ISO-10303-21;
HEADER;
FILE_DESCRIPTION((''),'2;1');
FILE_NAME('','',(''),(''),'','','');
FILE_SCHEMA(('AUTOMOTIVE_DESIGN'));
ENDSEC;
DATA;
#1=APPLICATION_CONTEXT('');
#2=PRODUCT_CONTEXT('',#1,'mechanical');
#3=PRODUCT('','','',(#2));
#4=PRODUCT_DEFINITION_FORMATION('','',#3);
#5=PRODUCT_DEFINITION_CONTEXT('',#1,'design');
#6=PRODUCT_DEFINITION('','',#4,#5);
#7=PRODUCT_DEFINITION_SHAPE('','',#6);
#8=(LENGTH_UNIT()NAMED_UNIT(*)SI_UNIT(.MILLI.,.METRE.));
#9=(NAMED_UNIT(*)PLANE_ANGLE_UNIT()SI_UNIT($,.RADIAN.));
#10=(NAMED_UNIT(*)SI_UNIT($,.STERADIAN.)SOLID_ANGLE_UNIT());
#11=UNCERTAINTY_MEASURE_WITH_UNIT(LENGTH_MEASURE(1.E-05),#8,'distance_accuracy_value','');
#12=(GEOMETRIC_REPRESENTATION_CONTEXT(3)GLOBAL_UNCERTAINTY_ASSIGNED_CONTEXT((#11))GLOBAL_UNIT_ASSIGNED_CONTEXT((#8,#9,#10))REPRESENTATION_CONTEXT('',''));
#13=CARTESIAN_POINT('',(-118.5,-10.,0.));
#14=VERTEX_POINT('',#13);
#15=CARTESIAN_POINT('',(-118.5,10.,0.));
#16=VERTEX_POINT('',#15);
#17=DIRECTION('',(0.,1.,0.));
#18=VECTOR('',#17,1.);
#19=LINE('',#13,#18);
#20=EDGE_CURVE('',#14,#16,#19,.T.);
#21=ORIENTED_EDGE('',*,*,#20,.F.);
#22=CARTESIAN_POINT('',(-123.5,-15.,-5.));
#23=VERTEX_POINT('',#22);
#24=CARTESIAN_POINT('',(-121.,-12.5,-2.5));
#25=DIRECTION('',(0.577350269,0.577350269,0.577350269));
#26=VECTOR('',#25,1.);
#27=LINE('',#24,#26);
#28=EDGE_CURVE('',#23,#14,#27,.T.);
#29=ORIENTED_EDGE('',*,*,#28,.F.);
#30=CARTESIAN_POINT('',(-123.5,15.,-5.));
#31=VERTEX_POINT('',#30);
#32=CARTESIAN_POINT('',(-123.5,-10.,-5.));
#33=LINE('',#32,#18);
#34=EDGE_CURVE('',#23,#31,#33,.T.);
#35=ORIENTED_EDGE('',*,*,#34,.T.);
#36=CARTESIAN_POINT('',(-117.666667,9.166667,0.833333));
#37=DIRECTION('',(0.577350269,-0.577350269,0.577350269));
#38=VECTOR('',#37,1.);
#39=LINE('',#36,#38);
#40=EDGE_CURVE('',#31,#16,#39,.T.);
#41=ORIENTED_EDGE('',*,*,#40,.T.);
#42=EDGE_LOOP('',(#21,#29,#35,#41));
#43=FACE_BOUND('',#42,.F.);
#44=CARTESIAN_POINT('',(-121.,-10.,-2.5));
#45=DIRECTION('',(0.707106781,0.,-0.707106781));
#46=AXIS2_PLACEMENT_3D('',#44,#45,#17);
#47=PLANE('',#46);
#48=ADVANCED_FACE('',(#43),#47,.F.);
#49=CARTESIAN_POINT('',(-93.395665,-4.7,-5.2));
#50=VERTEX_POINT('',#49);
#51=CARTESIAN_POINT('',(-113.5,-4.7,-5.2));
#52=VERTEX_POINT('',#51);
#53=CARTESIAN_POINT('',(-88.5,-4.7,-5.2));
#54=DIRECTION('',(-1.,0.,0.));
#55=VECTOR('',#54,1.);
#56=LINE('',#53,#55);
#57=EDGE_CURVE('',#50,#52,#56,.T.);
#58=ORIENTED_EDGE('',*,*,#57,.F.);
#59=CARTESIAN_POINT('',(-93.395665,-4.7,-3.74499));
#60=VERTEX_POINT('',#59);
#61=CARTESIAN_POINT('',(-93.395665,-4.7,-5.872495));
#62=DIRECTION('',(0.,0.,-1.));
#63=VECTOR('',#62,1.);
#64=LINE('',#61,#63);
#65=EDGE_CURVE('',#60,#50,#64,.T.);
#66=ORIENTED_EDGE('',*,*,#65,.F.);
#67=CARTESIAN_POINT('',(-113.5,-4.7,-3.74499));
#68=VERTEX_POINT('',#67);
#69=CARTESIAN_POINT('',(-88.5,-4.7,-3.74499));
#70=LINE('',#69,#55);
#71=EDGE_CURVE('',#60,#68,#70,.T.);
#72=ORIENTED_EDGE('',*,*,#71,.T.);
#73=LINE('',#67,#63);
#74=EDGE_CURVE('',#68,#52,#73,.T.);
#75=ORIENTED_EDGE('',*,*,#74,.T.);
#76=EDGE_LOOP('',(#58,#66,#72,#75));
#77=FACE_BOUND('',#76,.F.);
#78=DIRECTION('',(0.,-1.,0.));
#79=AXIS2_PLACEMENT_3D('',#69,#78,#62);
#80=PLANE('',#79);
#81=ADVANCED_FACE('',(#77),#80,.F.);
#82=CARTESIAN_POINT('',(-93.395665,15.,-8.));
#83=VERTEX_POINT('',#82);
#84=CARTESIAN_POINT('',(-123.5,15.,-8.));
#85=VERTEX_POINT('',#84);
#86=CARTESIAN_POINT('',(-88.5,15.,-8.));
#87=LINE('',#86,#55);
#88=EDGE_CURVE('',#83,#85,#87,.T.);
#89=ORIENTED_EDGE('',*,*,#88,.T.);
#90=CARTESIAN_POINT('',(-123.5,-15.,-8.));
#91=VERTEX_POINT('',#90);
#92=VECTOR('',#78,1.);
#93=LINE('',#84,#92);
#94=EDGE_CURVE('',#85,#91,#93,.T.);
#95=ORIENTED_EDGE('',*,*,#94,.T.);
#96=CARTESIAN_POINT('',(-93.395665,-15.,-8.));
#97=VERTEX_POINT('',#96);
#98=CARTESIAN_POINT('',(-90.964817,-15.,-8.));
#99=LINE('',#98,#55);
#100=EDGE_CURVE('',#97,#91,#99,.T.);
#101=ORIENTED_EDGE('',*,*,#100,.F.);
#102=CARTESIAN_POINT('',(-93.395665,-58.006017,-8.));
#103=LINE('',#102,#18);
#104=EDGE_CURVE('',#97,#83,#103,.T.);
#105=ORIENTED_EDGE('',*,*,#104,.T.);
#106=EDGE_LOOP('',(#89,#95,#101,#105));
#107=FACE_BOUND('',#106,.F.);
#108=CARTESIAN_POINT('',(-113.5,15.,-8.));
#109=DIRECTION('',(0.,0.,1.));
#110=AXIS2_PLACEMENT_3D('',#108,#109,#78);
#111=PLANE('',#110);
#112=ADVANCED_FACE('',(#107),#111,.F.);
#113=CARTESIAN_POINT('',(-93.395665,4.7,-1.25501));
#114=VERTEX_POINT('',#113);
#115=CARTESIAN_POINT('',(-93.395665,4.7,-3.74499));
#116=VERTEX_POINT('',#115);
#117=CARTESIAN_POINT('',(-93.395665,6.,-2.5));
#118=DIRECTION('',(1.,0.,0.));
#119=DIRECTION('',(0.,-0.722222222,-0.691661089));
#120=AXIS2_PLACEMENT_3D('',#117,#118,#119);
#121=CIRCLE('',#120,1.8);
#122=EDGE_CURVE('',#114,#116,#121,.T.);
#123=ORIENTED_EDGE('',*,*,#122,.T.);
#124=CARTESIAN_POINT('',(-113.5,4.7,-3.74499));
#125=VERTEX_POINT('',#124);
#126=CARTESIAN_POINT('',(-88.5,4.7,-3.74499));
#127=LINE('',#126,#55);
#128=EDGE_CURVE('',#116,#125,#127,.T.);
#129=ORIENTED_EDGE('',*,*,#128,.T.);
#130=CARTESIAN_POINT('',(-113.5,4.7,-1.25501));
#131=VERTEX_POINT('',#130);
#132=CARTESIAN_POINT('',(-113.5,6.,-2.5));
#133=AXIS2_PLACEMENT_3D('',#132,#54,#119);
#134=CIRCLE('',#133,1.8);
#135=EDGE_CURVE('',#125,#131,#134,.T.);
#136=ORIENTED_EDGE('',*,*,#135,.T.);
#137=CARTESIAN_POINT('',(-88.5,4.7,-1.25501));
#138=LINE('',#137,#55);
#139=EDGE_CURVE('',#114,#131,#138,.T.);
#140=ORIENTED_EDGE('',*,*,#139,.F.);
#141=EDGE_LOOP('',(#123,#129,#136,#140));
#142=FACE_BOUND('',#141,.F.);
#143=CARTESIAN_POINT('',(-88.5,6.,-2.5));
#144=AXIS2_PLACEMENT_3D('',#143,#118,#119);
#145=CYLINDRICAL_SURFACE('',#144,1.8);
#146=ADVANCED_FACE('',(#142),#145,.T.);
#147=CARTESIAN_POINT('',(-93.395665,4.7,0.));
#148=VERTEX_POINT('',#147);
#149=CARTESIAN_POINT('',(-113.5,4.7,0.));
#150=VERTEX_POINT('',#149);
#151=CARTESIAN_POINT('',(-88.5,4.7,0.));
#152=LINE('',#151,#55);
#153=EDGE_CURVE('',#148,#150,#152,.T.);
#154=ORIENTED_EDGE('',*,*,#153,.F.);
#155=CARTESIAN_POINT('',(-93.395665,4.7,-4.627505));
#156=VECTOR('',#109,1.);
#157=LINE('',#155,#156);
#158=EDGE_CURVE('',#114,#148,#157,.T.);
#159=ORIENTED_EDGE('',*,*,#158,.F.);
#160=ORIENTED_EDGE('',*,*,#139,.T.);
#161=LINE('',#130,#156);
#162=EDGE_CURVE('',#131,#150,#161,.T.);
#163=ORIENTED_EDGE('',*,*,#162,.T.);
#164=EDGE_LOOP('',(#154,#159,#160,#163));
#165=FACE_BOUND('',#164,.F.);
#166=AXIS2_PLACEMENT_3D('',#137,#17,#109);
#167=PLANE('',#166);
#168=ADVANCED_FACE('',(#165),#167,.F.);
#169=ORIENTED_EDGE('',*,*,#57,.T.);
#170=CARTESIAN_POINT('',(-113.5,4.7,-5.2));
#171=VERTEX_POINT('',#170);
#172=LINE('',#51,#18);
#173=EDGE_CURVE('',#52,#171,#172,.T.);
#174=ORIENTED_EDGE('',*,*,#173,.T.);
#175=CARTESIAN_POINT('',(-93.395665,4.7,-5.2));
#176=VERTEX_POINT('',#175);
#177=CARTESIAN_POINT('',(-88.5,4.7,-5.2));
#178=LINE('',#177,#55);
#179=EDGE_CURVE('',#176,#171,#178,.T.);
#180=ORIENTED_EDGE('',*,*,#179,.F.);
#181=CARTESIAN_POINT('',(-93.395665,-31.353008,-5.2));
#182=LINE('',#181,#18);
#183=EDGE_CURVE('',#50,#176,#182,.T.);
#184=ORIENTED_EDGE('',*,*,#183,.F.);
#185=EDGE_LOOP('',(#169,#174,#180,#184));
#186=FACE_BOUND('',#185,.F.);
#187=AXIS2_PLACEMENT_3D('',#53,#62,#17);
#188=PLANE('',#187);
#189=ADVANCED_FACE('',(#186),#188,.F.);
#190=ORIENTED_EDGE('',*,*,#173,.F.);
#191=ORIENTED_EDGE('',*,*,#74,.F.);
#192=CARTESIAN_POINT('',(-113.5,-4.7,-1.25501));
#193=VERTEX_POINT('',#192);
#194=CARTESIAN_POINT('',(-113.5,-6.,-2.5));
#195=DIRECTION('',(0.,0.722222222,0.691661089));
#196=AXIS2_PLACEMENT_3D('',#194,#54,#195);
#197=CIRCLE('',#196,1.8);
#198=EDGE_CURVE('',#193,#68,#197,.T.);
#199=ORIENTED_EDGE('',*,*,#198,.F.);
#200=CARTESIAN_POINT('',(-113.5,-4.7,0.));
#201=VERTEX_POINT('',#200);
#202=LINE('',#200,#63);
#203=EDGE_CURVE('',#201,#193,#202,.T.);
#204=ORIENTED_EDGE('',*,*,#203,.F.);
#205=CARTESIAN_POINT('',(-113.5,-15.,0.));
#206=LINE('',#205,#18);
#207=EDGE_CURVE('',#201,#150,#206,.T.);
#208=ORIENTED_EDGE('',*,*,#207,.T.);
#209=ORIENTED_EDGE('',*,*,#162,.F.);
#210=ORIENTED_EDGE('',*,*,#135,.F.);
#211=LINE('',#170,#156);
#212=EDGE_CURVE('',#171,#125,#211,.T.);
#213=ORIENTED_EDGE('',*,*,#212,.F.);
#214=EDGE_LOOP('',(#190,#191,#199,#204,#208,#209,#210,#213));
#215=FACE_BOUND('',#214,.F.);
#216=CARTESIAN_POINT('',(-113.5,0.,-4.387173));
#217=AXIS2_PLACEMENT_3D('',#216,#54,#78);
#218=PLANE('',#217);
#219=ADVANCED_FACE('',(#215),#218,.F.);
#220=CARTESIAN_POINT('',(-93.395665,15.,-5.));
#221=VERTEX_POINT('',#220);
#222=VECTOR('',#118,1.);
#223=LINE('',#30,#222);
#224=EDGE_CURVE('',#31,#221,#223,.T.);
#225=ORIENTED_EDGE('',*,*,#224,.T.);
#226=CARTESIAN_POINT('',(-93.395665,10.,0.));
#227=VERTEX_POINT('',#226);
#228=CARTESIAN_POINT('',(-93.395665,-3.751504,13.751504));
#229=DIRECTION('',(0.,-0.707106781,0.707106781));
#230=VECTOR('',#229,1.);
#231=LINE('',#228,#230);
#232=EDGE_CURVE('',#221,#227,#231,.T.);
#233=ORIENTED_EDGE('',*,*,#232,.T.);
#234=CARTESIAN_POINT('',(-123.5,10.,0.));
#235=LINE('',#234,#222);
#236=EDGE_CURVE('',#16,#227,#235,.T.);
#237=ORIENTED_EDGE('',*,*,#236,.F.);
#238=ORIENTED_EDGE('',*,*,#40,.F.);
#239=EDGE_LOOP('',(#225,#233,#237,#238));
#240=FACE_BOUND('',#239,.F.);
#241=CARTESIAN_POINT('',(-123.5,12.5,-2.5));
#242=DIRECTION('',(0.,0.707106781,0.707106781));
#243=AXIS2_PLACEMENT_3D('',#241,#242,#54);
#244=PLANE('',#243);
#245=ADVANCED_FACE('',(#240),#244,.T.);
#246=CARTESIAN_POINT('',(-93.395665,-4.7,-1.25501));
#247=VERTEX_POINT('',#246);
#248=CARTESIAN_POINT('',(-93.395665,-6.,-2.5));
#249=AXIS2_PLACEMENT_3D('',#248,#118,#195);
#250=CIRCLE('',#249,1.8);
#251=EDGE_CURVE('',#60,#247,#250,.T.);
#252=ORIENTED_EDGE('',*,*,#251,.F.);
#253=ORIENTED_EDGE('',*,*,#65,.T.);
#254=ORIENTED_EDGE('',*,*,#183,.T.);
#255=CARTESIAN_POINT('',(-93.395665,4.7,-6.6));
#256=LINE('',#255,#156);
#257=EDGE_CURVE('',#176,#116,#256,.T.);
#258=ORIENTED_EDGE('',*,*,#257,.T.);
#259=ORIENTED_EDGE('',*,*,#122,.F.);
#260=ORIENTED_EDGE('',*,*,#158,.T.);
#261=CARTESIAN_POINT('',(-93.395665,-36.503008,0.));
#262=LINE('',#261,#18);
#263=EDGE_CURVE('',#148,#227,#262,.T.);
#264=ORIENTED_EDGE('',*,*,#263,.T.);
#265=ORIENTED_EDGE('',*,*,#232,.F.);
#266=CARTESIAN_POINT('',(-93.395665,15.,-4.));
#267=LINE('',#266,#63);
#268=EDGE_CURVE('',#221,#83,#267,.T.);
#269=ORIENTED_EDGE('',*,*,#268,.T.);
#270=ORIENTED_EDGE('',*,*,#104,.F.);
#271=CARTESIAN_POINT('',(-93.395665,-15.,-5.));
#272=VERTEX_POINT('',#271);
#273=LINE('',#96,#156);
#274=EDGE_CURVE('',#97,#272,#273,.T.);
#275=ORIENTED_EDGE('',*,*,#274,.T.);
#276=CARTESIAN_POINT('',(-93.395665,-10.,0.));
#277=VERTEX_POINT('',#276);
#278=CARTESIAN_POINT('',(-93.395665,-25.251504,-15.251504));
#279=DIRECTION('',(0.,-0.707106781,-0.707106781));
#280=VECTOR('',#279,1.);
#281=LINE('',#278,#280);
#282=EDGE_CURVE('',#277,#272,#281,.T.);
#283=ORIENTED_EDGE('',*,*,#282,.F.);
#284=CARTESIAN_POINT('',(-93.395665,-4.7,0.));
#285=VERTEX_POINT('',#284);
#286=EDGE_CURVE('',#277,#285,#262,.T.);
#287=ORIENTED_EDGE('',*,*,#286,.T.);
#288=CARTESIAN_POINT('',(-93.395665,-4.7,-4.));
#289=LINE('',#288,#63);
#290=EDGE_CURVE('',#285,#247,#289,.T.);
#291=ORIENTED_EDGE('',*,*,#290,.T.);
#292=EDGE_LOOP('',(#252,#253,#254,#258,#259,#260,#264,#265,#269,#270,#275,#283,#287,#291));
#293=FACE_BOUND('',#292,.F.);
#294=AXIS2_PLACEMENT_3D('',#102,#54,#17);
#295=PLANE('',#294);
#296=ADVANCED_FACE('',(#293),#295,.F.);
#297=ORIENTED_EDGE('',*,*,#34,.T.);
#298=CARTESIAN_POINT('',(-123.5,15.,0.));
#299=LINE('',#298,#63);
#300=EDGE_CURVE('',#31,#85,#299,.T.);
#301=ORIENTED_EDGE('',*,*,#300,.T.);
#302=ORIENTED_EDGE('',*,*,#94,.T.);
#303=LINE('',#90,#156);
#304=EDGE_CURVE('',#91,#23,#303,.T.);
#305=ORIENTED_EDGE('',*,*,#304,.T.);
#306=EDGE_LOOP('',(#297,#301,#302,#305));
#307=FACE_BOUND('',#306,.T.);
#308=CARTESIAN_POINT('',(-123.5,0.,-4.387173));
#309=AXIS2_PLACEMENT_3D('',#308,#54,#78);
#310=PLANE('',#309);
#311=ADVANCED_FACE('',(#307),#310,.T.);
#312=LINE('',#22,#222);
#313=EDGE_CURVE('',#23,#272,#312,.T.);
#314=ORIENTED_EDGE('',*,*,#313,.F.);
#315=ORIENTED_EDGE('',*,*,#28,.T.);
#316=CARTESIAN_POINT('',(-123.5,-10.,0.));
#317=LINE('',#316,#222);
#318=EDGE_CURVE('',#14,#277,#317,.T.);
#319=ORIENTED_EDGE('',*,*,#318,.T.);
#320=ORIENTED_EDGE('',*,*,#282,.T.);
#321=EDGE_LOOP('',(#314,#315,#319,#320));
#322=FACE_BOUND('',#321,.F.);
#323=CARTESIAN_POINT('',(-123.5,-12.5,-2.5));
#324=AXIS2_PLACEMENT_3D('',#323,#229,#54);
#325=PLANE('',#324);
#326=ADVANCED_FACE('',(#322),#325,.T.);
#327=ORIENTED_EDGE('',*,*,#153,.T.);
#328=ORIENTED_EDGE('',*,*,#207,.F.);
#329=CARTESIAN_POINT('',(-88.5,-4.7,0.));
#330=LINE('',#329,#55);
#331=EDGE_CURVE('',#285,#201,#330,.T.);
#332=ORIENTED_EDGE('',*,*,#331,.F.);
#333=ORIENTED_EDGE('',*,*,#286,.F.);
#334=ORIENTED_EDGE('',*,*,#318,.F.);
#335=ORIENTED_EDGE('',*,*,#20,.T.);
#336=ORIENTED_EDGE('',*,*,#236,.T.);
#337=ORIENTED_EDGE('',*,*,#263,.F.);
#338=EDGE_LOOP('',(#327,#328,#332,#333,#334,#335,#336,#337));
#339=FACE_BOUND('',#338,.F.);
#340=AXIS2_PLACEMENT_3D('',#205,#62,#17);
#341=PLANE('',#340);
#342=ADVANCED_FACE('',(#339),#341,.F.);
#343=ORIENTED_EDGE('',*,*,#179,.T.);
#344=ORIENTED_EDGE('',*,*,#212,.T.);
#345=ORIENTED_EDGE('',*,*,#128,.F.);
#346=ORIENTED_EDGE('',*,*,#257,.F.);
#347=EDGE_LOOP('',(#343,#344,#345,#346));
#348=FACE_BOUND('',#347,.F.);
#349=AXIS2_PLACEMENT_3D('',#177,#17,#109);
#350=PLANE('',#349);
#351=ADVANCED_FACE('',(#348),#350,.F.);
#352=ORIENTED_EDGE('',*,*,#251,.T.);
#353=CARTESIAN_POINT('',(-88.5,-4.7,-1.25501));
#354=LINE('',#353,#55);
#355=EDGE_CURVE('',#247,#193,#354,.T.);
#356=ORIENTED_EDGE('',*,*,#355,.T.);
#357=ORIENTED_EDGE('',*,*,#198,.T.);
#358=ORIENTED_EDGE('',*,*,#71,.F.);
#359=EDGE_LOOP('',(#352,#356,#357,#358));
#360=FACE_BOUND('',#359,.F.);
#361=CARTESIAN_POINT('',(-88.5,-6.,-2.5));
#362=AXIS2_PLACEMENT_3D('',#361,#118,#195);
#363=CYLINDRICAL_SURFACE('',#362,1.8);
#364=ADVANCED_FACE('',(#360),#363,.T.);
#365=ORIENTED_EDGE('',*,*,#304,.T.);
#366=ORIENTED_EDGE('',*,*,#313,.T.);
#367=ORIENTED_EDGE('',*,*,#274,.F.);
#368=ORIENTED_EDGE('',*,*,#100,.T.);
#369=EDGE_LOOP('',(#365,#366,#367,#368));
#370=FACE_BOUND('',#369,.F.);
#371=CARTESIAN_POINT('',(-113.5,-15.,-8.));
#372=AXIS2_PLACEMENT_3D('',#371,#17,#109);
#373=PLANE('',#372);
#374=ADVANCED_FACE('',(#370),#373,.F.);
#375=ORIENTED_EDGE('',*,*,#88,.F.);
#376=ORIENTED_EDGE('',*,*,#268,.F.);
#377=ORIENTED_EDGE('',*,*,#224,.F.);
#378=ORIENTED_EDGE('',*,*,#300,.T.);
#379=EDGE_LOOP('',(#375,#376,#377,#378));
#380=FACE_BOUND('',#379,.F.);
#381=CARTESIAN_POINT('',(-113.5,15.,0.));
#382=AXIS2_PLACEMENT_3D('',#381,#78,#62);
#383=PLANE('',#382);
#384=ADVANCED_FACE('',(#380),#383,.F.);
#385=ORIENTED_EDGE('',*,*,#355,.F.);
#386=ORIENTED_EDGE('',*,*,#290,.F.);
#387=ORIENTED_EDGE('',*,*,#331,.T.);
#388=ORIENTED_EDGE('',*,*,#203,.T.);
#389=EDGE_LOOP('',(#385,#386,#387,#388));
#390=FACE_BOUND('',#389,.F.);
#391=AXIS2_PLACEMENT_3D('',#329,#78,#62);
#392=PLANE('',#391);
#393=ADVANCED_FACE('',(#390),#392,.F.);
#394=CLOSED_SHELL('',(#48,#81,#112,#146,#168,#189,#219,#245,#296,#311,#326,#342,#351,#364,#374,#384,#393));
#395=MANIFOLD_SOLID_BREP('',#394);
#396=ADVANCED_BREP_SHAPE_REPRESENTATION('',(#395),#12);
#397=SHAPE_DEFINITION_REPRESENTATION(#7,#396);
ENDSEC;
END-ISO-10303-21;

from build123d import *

# Parameters (mm, degrees)
F0_W      = 16
F0_H      = 6
F1_DEPTH  = 95
F2_DEPTH  = 5
F3_R      = 2
F4_DEPTH  = 127.001
F5_SIZE   = 0.49999
F6_DEPTH  = 25
F8_DEPTH  = 25
F9_W      = 318.6057507992
F9_H      = 243.2989366353
F10_DEPTH = 19.501
F12_DEPTH = 10
F14_DEPTH = 8.001
F15_SIZE  = 5
F16_SIZE  = 5


# Not quite as in the source:
# - a fillet or chamfer is up to 0.001 mm smaller than in the source, because OpenCascade refuses the exact size


with BuildPart() as f1:
    # F0 (on Top) → F1 (new body)
    with BuildSketch(Plane.XY):
        Polygon((-8, -4.5), (63.5, -4.5), (63.5, 4.5), (-26, 4.5), (-28, 4.5), (-44, 4.5), (-46, 4.5), (-63.5, 4.5), (-63.5, -4.5), (-28, -4.5), (-26, -4.5), (-10, -4.5), align=None)
        with Locations((-54, 0)):
            Rectangle(F0_W, F0_H, mode=Mode.SUBTRACT)
        with Locations((-36, 0)):
            Rectangle(F0_W, F0_H, mode=Mode.SUBTRACT)
        with Locations((-18, 0)):
            Rectangle(F0_W, F0_H, mode=Mode.SUBTRACT)
        Rectangle(F0_W, F0_H, mode=Mode.SUBTRACT)
        with Locations((18, 0)):
            Rectangle(F0_W, F0_H, mode=Mode.SUBTRACT)
        with Locations((36, 0)):
            Rectangle(F0_W, F0_H, mode=Mode.SUBTRACT)
        with Locations((54, 0)):
            Rectangle(F0_W, F0_H, mode=Mode.SUBTRACT)
    extrude(amount=F1_DEPTH)

    # F0 (on Top) → F2 (join)
    with BuildSketch(Plane.XY):
        Polygon((-8, -4.5), (63.5, -4.5), (63.5, 4.5), (-26, 4.5), (-28, 4.5), (-44, 4.5), (-46, 4.5), (-63.5, 4.5), (-63.5, -4.5), (-28, -4.5), (-26, -4.5), (-10, -4.5), align=None)
        with Locations((-54, 0)):
            Rectangle(F0_W, F0_H, mode=Mode.SUBTRACT)
        with Locations((-36, 0)):
            Rectangle(F0_W, F0_H, mode=Mode.SUBTRACT)
        with Locations((-18, 0)):
            Rectangle(F0_W, F0_H, mode=Mode.SUBTRACT)
        Rectangle(F0_W, F0_H, mode=Mode.SUBTRACT)
        with Locations((18, 0)):
            Rectangle(F0_W, F0_H, mode=Mode.SUBTRACT)
        with Locations((36, 0)):
            Rectangle(F0_W, F0_H, mode=Mode.SUBTRACT)
        with Locations((54, 0)):
            Rectangle(F0_W, F0_H, mode=Mode.SUBTRACT)
        with Locations((-54, 0)):
            Rectangle(F0_W, F0_H)
        with Locations((-36, 0)):
            Rectangle(F0_W, F0_H)
        with Locations((-18, 0)):
            Rectangle(F0_W, F0_H)
        Rectangle(F0_W, F0_H)
        with Locations((18, 0)):
            Rectangle(F0_W, F0_H)
        with Locations((36, 0)):
            Rectangle(F0_W, F0_H)
        with Locations((54, 0)):
            Rectangle(F0_W, F0_H)
    extrude(amount=-F2_DEPTH)

    # F3 (on face) → F4 (cut, through all)
    with BuildSketch(Plane(origin=(-63.5, 0, 0), x_dir=(0, -1, 0), z_dir=(-1, 0, 0))):
        with Locations((-6, -2.5)):
            Circle(F3_R)
        with Locations((6, -2.5)):
            Circle(F3_R)
    extrude(amount=-F4_DEPTH, mode=Mode.SUBTRACT)

    # F5 (size 0.5 in the source; OpenCascade refuses exactly that, so slightly less here)
    f5_edges = [f1.edges().sort_by_distance(p)[0] for p in [
        (-63.5, 4.5, 46.911438),
        (-63.5, -4.5, 46.911438),
        (0, 4.5, -5),
        (-63.5, 0, -5),
        (-63.5, 4, -2.5),
        (0, 4.5, 95),
        (-63.5, 0, 95),
        (0, -4.5, 95),
        (63.5, 0, 95),
        (63.5, 0, -5),
        (63.5, 4.5, 46.911438),
        (63.5, -4.5, 46.911438),
        (-63.5, -4, -2.5),
        (63.5, 4, -2.5),
        (63.5, -4, -2.5),
        (54, -3, 95),
        (46, 0, 95),
        (54, 3, 95),
        (62, 0, 95),
        (44, 0, 95),
        (36, 3, 95),
        (36, -3, 95),
        (8, 0, 95),
        (10, 0, 95),
        (18, 3, 95),
        (18, -3, 95),
        (26, 0, 95),
        (28, 0, 95),
        (0, 3, 95),
        (0, -3, 95),
        (-8, 0, 95),
        (-10, 0, 95),
        (-18, -3, 95),
        (-26, 0, 95),
        (-18, 3, 95),
        (-36, 3, 95),
        (-28, 0, 95),
        (-36, -3, 95),
        (-54, 3, 95),
        (-62, 0, 95),
        (-54, -3, 95),
        (-46, 0, 95),
        (-44, 0, 95),
    ]]
    chamfer(f5_edges, length=F5_SIZE)

    # F3 (on face) → F6 (join)
    with BuildSketch(Plane(origin=(-63.5, 0, 0), x_dir=(0, -1, 0), z_dir=(-1, 0, 0))):
        with BuildLine():
            ThreePointArc((-4.5, -1.1771243445), (-4.1291713066, -1.7928932188), (-4, -2.5))
            ThreePointArc((-4, -2.5), (-4.1291713066, -3.2071067812), (-4.5, -3.8228756555))
            Line((-4.5, -3.8228756555), (-4.5, -5))
            Line((-4.5, -5), (4.5, -5))
            Line((4.5, -5), (4.5, -3.8228756555))
            ThreePointArc((4.5, -3.8228756555), (4, -2.5), (4.5, -1.1771243445))
            Line((4.5, -1.1771243445), (4.5, 95))
            Line((4.5, 95), (-4.5, 95))
            Line((-4.5, 95), (-4.5, -1.1771243445))
        make_face()
    extrude(amount=F6_DEPTH)


with BuildPart() as f8:
    # F7 (on face) → F8 (new body)
    with BuildSketch(Plane(origin=(-88.5, 0, 0), x_dir=(0, -1, 0), z_dir=(-1, 0, 0))):
        with BuildLine():
            Line((15, 0), (4.7, 0))
            Line((4.7, 0), (4.7, -1.2550100402))
            ThreePointArc((4.7, -1.2550100402), (4.2, -2.5), (4.7, -3.7449899598))
            Line((4.7, -3.7449899598), (4.7, -5.2))
            Line((4.7, -5.2), (-4.7, -5.2))
            Line((-4.7, -5.2), (-4.7, -3.7449899598))
            ThreePointArc((-4.7, -3.7449899598), (-4.2, -2.5), (-4.7, -1.2550100402))
            Line((-4.7, -1.2550100402), (-4.7, 0))
            Line((-4.7, 0), (-15, 0))
            Line((-15, 0), (-15, -8))
            Line((-15, -8), (15, -8))
            Line((15, -8), (15, 0))
        make_face()
    extrude(amount=F8_DEPTH)


with BuildPart() as f10_tool:
    # F9 (on face) → F10 (new body, through all)
    with BuildSketch(Plane(origin=(0, 4.5, 0), x_dir=(-1, 0, 0), z_dir=(0, 1, 0))):
        with Locations((-68.3380588889, 100.3342196345)):
            Rectangle(F9_W, F9_H)
    extrude(amount=-F10_DEPTH)


with BuildPart() as f1_1:
    add(f1.part)

    # F10: cut by f10_tool
    add(f10_tool.part, mode=Mode.SUBTRACT)


with BuildPart() as f8_1:
    add(f8.part)

    # F10: cut by f10_tool
    add(f10_tool.part, mode=Mode.SUBTRACT)

    # F11 (on face) → F12 (join)
    with BuildSketch(Plane(origin=(-113.5, 0, 0), x_dir=(0, -1, 0), z_dir=(-1, 0, 0))):
        with BuildLine():
            Line((-4.7, -1.2550100402), (-4.7, 0))
            Line((-4.7, 0), (-15, 0))
            Line((-15, 0), (-15, -8))
            Line((-15, -8), (15, -8))
            Line((15, -8), (15, 0))
            Line((15, 0), (4.7, 0))
            Line((4.7, 0), (4.7, -1.2550100402))
            ThreePointArc((4.7, -1.2550100402), (4.2, -2.5), (4.7, -3.7449899598))
            Line((4.7, -3.7449899598), (4.7, -5.2))
            Line((4.7, -5.2), (-4.7, -5.2))
            Line((-4.7, -5.2), (-4.7, -3.7449899598))
            ThreePointArc((-4.7, -3.7449899598), (-4.2, -2.5), (-4.7, -1.2550100402))
        make_face()
        with BuildLine():
            Line((4.7, 0), (-4.7, 0))
            Line((-4.7, 0), (-4.7, -1.2550100402))
            ThreePointArc((-4.7, -1.2550100402), (-4.2, -2.5), (-4.7, -3.7449899598))
            Line((-4.7, -3.7449899598), (-4.7, -5.2))
            Line((-4.7, -5.2), (4.7, -5.2))
            Line((4.7, -5.2), (4.7, -3.7449899598))
            ThreePointArc((4.7, -3.7449899598), (4.2, -2.5), (4.7, -1.2550100402))
            Line((4.7, -1.2550100402), (4.7, 0))
        make_face()
    extrude(amount=F12_DEPTH)

    # F13 (on face) → F14 (cut, through all)
    with BuildSketch(Plane(origin=(0, 0, -8), x_dir=(1, 0, 0), z_dir=(0, 0, -1))):
        Polygon((-93.395665288, -19.6107532829), (-75.3739327192, -19.6107532829), (-75.3739327192, 58.0060165375), (-93.395665288, 58.0060165375), (-93.395665288, 15), (-90.9648165107, 15), (-90.9648165107, -4.5), (-88.5, -4.5), (-88.5, -15), (-93.395665288, -15), align=None)
        Polygon((-93.395665288, 15), (-93.395665288, -15), (-88.5, -15), (-88.5, -4.5), (-90.9648165107, -4.5), (-90.9648165107, 15), align=None)
    extrude(amount=-F14_DEPTH, mode=Mode.SUBTRACT)

    # F15
    f15_edges = [f8_1.edges().sort_by_distance(p)[0] for p in [
        (-108.447833, 15, 0),
        (-108.447833, -15, 0),
    ]]
    chamfer(f15_edges, length=F15_SIZE)

    # F16
    f16_edges = [f8_1.edges().sort_by_distance(p)[0] for p in [
        (-123.5, 0, 0),
    ]]
    chamfer(f16_edges, length=F16_SIZE)


solid = f8_1.part
